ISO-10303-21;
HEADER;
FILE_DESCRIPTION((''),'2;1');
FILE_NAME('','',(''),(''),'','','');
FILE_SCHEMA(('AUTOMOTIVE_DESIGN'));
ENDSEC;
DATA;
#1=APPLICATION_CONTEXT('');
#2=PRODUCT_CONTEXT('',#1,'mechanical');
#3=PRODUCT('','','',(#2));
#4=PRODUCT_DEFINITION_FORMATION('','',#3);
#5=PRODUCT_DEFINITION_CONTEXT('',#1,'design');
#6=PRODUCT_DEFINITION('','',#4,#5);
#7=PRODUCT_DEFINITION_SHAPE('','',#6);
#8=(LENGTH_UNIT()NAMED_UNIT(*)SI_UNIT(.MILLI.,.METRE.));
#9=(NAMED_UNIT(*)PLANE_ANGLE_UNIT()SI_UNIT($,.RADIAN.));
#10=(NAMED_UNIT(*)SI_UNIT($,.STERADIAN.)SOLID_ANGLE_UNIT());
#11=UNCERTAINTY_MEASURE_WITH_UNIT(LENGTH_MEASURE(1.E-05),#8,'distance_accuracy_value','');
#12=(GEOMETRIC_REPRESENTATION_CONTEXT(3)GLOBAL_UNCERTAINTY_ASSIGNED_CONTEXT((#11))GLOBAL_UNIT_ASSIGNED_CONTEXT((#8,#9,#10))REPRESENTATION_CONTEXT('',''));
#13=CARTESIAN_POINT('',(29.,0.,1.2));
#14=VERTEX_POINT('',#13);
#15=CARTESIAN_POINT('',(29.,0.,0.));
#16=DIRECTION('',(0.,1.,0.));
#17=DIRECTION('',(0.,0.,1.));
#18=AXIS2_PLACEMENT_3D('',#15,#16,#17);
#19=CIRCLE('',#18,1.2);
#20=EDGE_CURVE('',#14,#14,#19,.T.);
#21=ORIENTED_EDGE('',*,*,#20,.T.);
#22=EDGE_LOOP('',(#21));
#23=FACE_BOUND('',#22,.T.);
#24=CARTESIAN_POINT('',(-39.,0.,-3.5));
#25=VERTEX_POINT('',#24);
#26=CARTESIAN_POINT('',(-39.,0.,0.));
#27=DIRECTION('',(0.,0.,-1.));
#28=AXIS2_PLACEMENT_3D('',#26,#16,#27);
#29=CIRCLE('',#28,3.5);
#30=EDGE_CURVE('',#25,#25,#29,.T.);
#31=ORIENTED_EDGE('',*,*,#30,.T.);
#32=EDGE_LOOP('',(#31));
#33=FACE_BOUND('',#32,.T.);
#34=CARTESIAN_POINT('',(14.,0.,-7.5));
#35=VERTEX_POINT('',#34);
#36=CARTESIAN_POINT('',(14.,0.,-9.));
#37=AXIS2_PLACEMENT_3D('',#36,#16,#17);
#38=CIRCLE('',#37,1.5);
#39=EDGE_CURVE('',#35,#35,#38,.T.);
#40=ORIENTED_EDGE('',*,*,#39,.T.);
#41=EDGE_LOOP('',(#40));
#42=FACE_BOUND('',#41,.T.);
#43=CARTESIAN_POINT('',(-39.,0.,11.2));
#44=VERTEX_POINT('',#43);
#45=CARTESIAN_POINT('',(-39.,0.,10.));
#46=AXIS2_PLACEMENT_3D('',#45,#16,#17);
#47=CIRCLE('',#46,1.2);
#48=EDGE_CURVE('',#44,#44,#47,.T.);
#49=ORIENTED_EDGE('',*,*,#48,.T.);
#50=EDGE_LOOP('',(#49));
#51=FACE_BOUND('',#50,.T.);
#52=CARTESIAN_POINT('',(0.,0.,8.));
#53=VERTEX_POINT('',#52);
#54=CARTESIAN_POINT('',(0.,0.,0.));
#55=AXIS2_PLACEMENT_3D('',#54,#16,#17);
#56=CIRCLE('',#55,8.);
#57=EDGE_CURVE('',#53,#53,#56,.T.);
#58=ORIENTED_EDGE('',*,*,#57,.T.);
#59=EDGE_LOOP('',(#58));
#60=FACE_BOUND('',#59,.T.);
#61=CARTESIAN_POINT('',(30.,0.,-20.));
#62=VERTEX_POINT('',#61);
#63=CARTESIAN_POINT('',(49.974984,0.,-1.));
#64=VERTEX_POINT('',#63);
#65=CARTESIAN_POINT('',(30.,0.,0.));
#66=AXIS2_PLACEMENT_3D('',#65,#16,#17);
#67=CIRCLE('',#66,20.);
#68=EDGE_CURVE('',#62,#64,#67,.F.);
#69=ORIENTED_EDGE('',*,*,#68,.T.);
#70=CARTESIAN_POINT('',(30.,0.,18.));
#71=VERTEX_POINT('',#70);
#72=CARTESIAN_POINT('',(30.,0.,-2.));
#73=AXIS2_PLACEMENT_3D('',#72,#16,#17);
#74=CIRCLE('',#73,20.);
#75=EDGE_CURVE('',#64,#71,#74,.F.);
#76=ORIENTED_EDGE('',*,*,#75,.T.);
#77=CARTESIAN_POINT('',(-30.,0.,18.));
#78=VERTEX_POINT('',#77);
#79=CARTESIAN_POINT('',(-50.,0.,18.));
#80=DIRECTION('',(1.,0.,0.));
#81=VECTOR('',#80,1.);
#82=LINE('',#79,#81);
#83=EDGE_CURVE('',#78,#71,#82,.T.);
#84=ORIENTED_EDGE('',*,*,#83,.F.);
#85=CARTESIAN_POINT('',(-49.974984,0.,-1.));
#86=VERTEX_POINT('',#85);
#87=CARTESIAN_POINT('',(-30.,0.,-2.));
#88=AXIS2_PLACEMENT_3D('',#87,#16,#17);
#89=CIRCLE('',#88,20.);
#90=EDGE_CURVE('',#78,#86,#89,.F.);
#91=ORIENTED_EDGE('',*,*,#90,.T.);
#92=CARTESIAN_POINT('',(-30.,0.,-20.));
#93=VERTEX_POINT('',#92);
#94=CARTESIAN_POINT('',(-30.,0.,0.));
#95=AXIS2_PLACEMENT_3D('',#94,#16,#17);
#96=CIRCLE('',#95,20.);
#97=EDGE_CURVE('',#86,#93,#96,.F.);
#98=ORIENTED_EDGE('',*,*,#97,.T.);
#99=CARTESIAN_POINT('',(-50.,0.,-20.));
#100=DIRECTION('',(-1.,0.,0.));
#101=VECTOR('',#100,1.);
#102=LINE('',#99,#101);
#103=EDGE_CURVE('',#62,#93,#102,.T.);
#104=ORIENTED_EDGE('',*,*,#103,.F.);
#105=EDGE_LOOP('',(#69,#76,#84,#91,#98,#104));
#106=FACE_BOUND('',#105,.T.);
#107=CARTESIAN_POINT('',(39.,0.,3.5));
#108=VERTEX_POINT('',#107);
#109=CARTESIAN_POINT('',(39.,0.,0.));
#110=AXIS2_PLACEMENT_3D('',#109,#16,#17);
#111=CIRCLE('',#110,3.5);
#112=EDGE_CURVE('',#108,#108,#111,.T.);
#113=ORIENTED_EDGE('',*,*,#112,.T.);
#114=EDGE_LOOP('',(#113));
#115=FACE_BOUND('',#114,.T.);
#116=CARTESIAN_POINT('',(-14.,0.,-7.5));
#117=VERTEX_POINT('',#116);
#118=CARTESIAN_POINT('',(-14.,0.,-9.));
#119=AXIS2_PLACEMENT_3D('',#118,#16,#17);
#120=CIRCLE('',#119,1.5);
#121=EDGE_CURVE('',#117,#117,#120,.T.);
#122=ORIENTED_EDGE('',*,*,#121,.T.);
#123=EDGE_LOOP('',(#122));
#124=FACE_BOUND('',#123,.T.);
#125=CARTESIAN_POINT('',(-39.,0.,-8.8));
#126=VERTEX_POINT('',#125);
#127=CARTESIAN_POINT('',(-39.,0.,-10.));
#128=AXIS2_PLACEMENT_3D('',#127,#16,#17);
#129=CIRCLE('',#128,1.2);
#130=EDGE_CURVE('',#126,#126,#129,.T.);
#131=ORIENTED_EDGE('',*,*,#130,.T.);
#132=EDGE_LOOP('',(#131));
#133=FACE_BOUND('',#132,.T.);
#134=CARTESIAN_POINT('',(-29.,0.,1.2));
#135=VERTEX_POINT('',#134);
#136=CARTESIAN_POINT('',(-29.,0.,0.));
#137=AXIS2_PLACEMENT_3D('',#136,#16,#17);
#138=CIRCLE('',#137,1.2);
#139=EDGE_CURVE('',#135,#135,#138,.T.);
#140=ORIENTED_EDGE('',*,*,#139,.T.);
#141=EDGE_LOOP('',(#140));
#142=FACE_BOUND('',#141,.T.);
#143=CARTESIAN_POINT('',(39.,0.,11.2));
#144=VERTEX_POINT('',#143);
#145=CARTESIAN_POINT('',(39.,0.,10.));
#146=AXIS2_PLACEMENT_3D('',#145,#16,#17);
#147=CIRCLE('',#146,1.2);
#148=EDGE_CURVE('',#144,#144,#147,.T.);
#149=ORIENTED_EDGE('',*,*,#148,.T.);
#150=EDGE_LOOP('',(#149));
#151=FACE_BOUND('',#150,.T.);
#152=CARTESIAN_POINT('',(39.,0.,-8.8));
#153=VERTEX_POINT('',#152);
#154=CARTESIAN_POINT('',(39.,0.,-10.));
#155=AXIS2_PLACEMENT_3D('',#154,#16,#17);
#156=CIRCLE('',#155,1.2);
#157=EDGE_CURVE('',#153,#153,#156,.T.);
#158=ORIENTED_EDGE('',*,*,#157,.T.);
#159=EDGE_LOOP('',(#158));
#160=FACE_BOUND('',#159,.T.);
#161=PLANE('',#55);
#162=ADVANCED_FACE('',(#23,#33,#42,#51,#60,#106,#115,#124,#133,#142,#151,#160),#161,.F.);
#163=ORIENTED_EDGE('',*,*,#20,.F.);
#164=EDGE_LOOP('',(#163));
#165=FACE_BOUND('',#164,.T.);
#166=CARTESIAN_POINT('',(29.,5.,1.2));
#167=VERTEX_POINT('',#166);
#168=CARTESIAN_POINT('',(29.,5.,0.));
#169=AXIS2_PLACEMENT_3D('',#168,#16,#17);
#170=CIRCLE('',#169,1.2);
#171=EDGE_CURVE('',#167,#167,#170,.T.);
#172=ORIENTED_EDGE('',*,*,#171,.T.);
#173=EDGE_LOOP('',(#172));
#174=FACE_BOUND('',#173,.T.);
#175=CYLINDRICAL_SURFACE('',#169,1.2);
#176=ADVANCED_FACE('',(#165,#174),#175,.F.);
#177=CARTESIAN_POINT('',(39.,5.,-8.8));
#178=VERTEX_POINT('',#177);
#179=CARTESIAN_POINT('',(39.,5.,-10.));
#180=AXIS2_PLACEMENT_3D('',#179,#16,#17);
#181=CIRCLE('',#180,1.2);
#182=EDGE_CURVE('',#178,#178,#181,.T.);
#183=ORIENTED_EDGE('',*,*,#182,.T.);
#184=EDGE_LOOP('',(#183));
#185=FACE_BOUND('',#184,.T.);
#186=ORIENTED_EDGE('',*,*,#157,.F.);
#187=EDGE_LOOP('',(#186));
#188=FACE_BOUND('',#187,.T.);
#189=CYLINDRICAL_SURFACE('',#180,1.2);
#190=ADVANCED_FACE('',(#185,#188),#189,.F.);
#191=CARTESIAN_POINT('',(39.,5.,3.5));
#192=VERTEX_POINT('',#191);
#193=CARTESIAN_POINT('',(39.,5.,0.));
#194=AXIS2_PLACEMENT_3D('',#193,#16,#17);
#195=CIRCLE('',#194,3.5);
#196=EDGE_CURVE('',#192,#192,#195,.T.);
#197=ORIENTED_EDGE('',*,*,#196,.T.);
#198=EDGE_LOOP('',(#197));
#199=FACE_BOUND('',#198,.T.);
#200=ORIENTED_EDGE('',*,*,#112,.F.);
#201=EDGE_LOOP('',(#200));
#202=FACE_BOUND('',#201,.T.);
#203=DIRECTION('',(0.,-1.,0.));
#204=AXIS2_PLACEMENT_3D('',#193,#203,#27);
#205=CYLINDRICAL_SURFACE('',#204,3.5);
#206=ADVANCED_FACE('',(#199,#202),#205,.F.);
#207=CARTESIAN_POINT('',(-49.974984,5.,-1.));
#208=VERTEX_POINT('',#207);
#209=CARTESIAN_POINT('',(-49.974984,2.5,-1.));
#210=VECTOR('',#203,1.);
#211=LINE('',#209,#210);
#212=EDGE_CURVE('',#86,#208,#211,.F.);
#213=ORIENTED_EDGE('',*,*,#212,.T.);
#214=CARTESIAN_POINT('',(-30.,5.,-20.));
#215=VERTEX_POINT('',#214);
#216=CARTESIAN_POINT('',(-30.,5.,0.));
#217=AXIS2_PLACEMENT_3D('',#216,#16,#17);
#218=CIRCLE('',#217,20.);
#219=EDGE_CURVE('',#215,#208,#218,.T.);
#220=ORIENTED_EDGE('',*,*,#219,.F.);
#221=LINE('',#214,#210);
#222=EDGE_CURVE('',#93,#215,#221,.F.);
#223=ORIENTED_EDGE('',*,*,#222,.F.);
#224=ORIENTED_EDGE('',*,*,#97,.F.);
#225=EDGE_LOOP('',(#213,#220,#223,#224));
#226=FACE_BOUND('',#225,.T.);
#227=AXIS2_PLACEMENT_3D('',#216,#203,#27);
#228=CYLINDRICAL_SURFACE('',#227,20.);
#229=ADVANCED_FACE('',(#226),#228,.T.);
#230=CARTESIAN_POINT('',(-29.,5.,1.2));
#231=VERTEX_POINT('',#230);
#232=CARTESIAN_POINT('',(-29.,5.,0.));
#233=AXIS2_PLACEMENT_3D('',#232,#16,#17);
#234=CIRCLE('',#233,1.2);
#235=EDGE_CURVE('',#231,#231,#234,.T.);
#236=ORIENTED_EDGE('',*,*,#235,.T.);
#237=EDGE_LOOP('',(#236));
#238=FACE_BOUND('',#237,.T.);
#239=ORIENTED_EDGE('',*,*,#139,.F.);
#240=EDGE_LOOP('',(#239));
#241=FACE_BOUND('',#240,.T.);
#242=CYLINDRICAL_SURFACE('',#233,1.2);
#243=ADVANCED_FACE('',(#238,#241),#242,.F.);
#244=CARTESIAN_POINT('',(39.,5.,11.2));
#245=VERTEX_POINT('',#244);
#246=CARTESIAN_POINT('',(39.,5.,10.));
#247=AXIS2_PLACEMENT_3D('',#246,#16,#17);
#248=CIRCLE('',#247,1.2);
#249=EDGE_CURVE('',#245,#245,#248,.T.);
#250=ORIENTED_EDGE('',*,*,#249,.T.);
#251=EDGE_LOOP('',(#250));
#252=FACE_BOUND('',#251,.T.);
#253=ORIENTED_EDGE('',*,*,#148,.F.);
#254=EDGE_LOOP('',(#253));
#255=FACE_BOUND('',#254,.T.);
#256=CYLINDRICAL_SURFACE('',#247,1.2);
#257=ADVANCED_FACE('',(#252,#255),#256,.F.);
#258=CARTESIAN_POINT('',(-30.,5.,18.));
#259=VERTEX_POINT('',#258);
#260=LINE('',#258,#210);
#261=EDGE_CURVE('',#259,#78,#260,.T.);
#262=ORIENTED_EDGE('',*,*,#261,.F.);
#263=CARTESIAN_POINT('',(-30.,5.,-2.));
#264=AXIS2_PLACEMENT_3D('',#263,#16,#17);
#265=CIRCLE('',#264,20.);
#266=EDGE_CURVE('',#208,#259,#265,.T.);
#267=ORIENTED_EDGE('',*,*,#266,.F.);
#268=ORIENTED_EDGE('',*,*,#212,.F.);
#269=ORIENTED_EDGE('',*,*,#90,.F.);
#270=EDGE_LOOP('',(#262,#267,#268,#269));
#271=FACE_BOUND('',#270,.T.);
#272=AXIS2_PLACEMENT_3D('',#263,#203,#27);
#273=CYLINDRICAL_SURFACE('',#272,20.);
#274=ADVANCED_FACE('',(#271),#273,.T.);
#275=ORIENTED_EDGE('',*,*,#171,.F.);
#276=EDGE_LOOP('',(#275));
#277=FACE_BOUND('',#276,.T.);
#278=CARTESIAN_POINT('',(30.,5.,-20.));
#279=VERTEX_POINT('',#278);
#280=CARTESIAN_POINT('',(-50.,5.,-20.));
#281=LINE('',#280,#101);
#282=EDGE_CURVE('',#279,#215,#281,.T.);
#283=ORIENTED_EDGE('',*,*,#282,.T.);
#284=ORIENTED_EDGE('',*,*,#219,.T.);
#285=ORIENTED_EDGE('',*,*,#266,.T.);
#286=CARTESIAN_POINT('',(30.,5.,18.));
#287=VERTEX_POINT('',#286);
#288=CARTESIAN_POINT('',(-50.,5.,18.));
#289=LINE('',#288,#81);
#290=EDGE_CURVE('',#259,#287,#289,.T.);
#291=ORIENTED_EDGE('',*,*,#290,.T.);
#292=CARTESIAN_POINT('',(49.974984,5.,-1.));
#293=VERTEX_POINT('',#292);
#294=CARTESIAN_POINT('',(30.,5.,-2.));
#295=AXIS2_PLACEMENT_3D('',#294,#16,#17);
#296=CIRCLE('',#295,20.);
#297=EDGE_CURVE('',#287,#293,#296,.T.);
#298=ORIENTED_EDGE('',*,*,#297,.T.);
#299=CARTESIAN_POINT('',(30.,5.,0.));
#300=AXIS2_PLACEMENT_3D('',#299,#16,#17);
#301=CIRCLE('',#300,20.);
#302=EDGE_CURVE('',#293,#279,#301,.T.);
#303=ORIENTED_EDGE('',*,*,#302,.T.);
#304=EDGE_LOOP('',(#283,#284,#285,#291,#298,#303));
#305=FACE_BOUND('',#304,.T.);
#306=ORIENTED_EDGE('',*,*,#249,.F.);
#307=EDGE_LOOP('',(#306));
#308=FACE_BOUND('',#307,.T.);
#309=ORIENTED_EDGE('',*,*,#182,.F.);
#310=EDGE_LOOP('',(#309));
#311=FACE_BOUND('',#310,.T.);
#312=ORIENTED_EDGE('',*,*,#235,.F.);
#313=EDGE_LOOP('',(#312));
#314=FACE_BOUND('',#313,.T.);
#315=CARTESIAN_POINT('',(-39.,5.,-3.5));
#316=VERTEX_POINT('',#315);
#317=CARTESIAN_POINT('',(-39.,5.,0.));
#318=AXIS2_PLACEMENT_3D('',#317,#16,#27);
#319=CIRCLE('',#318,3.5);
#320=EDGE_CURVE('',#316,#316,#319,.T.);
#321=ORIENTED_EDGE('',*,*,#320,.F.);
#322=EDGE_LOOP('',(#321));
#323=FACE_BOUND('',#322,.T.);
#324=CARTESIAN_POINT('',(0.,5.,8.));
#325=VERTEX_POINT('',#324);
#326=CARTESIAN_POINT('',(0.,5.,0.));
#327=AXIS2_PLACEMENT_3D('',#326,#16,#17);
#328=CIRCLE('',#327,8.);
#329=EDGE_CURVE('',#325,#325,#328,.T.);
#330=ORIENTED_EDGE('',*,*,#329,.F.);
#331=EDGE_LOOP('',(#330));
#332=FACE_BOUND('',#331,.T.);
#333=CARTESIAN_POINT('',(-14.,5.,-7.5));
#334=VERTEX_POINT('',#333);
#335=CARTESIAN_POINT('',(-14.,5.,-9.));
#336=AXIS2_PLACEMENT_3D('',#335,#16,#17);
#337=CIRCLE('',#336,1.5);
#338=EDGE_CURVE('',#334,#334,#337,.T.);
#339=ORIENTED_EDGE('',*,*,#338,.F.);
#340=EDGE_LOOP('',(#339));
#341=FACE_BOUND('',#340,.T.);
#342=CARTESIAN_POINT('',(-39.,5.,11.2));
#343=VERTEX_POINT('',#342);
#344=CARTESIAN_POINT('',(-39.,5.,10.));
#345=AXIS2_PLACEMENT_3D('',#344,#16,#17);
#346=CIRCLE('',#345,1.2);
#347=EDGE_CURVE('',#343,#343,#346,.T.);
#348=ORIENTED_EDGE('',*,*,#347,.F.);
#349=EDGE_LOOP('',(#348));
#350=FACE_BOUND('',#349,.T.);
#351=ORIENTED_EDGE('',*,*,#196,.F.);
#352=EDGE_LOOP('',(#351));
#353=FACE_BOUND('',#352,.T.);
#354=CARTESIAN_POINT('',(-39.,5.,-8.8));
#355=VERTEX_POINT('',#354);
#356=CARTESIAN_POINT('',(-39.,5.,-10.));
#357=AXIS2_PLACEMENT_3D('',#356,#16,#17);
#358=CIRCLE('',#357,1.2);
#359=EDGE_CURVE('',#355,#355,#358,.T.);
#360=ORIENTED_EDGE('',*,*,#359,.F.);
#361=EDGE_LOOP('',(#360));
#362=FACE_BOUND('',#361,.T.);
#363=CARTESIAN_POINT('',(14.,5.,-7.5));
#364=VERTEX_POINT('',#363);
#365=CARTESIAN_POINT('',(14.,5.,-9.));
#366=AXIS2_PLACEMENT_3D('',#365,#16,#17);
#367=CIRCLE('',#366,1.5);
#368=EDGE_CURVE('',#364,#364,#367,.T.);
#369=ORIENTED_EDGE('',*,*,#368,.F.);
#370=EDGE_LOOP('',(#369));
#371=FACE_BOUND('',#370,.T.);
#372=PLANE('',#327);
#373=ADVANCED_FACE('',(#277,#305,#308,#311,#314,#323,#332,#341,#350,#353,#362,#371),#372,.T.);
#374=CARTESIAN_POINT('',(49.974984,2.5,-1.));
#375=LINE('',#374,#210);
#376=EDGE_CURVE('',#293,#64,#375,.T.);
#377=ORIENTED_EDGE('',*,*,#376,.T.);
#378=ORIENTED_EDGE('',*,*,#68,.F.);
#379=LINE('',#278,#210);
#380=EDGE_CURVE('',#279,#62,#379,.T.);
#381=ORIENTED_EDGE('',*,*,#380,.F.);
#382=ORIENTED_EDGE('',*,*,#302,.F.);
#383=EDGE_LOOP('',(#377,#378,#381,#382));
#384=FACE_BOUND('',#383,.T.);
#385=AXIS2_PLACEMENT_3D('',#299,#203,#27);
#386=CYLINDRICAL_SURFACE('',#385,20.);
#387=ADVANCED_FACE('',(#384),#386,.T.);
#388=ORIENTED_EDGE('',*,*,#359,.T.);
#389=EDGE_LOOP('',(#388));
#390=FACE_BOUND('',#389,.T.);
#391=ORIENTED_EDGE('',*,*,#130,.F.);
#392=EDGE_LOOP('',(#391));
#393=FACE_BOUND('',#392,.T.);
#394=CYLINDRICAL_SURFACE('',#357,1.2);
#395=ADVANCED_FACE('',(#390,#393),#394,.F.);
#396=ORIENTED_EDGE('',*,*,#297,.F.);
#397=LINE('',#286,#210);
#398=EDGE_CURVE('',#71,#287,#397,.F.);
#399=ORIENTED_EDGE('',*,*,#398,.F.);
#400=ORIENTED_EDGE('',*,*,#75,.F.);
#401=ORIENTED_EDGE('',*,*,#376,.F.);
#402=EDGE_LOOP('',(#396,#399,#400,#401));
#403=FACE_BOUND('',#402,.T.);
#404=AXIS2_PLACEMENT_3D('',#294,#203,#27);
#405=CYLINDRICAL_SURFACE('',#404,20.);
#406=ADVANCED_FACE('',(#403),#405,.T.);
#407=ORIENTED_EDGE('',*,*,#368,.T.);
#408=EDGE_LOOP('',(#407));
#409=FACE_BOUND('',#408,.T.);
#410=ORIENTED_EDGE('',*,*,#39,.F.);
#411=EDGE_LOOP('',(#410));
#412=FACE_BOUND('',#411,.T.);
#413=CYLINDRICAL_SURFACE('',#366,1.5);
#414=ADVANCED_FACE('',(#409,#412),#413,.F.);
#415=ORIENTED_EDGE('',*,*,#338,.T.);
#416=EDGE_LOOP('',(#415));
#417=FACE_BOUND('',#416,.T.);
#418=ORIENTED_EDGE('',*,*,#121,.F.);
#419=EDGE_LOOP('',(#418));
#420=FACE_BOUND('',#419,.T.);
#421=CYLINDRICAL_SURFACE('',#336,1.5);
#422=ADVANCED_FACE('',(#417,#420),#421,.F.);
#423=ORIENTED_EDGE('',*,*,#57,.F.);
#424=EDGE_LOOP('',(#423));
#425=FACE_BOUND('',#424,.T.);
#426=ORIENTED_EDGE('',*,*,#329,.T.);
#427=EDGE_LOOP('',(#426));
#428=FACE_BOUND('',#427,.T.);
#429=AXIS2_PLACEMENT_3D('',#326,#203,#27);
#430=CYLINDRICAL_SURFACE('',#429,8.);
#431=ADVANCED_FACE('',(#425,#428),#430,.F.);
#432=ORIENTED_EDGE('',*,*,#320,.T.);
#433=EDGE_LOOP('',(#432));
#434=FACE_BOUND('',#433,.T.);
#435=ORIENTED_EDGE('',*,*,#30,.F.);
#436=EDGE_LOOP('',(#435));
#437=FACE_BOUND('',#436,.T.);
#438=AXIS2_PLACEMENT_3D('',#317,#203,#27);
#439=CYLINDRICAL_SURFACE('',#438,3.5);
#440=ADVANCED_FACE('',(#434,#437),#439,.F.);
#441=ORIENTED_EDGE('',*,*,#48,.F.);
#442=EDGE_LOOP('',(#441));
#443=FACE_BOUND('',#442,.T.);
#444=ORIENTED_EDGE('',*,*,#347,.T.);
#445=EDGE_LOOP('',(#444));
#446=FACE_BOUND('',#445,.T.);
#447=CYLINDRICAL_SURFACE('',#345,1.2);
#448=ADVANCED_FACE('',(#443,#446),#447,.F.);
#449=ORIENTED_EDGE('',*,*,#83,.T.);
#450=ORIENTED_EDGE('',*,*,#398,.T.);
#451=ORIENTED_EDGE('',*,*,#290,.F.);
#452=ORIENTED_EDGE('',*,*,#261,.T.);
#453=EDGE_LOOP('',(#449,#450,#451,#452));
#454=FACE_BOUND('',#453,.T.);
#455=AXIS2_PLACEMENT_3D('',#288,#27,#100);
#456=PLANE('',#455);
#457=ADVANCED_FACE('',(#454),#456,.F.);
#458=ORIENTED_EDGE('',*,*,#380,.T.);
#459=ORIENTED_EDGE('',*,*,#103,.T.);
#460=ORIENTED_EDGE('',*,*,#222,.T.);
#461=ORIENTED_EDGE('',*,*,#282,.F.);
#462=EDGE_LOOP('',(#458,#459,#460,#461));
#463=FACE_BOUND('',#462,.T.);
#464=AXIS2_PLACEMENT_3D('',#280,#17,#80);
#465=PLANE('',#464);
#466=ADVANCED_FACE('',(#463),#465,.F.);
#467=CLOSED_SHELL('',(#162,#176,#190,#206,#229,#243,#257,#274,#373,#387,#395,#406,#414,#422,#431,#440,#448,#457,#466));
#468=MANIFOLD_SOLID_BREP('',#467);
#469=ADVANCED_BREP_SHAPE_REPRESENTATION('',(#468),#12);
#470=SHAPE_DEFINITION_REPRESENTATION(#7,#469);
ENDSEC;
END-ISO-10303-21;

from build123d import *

# Parameters (mm, degrees)
SKETCH_1_W          = 100
SKETCH_1_H          = 38
SKETCH_1_R          = 8
SKETCH_1_R_2        = 3.5
EXTRUDE_1_DEPTH     = 5
FILLET_1_R          = 20
MM_TRANSITIONAL_1_D = 3
HOLE_WIZARD_M2_1_D  = 2.4


with BuildPart() as part:
    # 草图1 → 凸台-拉伸1 (new body)
    with BuildSketch(Plane(origin=(0, 0, 0), x_dir=(1, 0, 0), z_dir=(0, 1, 0))):
        with Locations((0, 1)):
            Rectangle(SKETCH_1_W, SKETCH_1_H)
        with Locations(Location((0, 0, 0), (0, 0, 270))):
            Circle(SKETCH_1_R, mode=Mode.SUBTRACT)
        with Locations(Location((39, 0, 0), (0, 0, 270))):
            Circle(SKETCH_1_R_2, mode=Mode.SUBTRACT)
        with Locations(Location((-39, 0, 0), (0, 0, 90))):
            Circle(SKETCH_1_R_2, mode=Mode.SUBTRACT)
    extrude(amount=EXTRUDE_1_DEPTH)

    # 圆角1
    # the kernel refuses this fillet: 20 mm, written as the material it takes off along each edge
    with BuildSketch(Plane(origin=(-50, -50, -20), x_dir=(1, 0, 0), z_dir=(0, 1, 0))) as fillet_1_piece_1:
        with BuildLine():
            CenterArc((FILLET_1_R, -FILLET_1_R), FILLET_1_R, 90, 90)
            Line((0, -FILLET_1_R), (0, 0))
            Line((0, 0), (FILLET_1_R, 0))
        make_face()
    extrude(amount=105, mode=Mode.SUBTRACT)
    with BuildSketch(Plane(origin=(-50, -50, 18), x_dir=(1, 0, 0), z_dir=(0, 1, 0)), Plane(origin=(50, -50, -20), x_dir=(-1, 0, 0), z_dir=(0, 1, 0)), Plane(origin=(50, -50, 18), x_dir=(0, 0, -1), z_dir=(0, 1, 0))) as fillet_1_piece_2:
        with BuildLine():
            CenterArc((FILLET_1_R, FILLET_1_R), FILLET_1_R, 180, 90)
            Line((0, FILLET_1_R), (0, 0))
            Line((0, 0), (FILLET_1_R, 0))
        make_face()
    extrude(amount=105, mode=Mode.SUBTRACT)

    # 大小mm Transitional 暗销孔1 (through all)
    with Locations(Plane(origin=(0, 5, 0), x_dir=(1, 0, 0), z_dir=(0, 1, 0))):
        with Locations((14, 9), (-14, 9)):
            Hole(MM_TRANSITIONAL_1_D / 2)

    # M2 间隙孔1 (through all)
    with Locations(Plane.ZX.offset(5)):
        with Locations((-10, 39), (10, 39), (0, 29)):
            hole_wizard_m2_1 = Hole(HOLE_WIZARD_M2_1_D / 2)

    # 镜向1: M2 间隙孔1 across plane
    add(hole_wizard_m2_1.mirror(Plane(origin=(0, 0, 0), x_dir=(0, 0, 1), z_dir=(1, 0, 0))), mode=Mode.SUBTRACT)


solid = part.part
